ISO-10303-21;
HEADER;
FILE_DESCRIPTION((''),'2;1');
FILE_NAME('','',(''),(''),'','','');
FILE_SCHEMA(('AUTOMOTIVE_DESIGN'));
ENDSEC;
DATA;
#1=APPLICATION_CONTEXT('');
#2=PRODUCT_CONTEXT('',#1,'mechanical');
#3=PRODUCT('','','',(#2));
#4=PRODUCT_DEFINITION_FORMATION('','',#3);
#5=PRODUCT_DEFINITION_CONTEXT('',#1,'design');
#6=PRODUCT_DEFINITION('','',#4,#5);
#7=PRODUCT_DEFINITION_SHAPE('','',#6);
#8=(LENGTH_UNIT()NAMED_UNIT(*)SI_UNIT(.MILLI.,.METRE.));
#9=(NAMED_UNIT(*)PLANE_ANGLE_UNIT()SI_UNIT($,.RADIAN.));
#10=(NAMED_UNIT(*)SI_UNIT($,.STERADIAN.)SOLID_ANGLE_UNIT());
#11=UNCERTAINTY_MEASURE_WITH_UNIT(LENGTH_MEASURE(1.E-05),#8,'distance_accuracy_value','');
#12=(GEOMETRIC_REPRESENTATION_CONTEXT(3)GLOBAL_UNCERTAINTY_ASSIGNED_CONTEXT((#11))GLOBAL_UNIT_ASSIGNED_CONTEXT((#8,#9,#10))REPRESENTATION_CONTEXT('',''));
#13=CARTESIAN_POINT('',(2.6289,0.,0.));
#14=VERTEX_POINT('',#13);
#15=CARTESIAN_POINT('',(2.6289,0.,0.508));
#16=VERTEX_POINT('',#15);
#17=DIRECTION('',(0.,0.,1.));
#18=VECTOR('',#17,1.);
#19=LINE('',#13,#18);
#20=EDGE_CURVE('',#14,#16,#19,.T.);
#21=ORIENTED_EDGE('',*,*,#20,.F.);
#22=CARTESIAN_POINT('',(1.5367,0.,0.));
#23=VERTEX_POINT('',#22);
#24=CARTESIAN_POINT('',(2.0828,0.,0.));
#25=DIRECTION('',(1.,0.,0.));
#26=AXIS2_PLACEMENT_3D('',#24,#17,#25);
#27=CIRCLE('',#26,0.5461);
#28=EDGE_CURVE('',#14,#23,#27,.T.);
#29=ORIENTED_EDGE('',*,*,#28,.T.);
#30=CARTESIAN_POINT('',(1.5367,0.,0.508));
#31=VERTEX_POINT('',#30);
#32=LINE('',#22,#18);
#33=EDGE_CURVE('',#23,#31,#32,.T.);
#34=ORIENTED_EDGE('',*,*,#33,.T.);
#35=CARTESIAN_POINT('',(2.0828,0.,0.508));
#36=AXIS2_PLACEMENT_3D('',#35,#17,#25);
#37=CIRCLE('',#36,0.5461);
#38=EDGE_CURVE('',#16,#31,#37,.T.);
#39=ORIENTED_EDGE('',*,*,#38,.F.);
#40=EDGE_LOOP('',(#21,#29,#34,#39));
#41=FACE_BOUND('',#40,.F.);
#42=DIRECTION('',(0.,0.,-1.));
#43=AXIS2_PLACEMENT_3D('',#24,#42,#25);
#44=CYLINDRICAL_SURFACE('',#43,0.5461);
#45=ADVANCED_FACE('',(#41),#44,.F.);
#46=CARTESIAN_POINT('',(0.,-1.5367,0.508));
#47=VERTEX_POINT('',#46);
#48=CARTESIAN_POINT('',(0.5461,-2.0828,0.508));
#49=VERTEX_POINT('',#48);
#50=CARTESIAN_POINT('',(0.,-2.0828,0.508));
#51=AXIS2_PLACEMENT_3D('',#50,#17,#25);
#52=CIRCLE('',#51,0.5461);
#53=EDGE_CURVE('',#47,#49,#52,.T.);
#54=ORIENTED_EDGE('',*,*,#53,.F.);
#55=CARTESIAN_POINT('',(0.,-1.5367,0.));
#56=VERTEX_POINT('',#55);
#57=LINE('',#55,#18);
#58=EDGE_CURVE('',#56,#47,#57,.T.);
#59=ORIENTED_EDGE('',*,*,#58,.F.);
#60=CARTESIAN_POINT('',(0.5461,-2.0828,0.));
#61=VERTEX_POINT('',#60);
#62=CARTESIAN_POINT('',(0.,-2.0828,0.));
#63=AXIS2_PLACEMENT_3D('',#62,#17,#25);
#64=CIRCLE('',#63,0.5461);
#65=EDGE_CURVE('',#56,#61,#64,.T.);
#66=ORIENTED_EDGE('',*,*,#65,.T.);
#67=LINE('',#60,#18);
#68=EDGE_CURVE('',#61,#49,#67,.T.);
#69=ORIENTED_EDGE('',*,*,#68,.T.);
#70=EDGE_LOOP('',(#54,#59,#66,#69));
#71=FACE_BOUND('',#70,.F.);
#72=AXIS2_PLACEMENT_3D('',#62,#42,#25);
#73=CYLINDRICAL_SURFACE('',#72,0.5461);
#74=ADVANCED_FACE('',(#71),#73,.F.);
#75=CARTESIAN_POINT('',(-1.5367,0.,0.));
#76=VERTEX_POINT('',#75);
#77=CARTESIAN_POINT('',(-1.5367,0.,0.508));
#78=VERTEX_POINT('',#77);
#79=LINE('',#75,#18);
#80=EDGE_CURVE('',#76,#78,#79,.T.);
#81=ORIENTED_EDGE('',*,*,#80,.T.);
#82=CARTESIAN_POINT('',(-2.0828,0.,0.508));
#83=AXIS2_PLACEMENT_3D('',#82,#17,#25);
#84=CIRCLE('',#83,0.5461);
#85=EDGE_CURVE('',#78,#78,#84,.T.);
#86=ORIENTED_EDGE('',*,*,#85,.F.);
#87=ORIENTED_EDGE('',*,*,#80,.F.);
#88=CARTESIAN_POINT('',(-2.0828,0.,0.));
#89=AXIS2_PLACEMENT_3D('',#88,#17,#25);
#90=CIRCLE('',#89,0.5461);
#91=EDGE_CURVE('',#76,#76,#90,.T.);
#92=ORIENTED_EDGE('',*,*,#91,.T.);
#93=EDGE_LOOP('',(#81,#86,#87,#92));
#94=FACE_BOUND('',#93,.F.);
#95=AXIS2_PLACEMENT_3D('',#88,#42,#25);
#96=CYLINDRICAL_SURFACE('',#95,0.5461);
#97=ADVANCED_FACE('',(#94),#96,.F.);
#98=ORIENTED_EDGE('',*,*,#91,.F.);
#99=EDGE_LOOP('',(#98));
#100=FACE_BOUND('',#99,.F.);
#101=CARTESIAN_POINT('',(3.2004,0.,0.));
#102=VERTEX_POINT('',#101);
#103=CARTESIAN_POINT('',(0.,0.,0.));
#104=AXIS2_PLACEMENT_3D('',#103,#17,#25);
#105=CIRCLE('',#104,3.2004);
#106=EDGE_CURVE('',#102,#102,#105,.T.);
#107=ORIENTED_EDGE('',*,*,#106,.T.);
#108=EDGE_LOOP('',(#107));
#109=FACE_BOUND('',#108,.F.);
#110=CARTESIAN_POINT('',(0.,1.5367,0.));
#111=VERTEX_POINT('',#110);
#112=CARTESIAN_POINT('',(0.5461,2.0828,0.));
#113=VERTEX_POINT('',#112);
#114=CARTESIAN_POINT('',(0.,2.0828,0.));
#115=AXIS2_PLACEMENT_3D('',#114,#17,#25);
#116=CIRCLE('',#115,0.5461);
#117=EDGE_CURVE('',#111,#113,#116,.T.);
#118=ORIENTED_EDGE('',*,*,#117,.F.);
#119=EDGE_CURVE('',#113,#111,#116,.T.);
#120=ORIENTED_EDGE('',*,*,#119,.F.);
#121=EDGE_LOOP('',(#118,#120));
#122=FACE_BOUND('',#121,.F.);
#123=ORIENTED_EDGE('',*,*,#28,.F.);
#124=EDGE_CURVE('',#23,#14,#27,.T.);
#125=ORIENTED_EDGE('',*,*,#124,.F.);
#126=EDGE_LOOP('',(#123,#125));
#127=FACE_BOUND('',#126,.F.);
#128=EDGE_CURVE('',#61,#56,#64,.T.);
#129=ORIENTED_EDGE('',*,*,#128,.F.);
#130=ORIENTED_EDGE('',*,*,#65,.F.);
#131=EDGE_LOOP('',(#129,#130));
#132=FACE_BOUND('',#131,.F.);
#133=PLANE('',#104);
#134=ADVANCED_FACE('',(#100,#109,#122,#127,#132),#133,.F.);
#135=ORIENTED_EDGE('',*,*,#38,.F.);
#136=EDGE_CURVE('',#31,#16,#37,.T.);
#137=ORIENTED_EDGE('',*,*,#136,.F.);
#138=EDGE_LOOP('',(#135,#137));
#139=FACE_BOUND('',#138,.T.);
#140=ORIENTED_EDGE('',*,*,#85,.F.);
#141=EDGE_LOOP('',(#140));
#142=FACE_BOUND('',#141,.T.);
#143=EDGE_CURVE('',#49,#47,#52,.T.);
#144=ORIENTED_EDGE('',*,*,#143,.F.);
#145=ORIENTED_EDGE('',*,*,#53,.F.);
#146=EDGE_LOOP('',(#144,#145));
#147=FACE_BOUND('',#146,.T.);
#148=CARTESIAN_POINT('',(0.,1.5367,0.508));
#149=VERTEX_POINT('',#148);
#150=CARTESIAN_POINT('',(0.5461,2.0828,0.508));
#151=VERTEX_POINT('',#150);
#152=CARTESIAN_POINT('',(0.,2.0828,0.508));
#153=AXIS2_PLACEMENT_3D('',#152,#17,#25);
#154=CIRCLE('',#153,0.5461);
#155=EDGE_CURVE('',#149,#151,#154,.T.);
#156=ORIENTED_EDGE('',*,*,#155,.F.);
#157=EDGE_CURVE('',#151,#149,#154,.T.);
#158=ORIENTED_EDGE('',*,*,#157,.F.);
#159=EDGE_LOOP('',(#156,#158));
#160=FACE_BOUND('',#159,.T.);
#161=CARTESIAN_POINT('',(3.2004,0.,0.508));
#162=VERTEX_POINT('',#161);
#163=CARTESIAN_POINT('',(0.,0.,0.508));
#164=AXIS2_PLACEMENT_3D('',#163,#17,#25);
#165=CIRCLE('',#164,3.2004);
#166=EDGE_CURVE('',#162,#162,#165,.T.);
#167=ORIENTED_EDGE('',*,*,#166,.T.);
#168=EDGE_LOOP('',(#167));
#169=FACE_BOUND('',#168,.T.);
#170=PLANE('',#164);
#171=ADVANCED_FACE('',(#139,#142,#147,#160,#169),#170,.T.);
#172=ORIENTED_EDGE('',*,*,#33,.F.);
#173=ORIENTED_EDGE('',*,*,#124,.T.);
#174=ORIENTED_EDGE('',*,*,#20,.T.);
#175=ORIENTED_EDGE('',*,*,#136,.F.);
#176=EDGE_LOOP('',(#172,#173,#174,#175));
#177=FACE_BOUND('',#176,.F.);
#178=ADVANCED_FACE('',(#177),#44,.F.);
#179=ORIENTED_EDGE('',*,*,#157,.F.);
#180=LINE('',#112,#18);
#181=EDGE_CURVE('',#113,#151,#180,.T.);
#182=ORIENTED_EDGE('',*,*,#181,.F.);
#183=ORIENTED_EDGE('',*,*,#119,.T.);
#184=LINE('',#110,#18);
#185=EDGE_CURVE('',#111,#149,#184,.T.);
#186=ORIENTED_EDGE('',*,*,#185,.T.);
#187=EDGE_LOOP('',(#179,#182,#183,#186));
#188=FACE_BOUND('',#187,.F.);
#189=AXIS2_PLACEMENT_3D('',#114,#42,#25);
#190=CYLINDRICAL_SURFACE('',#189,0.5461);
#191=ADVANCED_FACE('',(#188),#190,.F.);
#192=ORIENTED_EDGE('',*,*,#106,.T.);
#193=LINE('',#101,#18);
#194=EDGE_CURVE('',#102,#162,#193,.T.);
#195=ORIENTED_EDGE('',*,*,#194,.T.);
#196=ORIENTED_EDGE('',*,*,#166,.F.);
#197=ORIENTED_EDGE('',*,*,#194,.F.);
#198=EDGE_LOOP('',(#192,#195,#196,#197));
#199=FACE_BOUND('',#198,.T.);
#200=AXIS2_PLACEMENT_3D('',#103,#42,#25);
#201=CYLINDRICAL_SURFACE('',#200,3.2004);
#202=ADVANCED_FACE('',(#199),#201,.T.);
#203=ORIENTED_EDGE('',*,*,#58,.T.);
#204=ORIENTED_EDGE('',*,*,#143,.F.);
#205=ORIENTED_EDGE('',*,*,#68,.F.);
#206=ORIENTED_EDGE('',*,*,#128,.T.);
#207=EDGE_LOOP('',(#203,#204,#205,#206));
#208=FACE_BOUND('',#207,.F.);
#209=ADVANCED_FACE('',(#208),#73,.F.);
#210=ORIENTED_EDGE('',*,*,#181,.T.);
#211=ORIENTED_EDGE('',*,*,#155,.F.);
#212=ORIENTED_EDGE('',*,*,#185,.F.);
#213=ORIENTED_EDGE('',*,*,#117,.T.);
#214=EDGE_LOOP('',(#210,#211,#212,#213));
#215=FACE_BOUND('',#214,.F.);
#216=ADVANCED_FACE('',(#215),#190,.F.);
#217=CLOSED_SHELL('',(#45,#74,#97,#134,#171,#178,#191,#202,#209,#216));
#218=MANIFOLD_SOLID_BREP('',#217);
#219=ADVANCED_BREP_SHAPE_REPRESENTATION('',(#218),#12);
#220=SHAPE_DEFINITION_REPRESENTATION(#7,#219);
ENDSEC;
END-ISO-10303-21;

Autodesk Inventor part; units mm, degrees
ref_plane "YZ Plane" through (0, 0, 0) normal (1, 0, 0) x (0, 1, 0)
ref_plane "XZ Plane" through (0, 0, 0) normal (0, 1, 0) x (-1, 0, 0)
ref_plane "XY Plane" through (0, 0, 0) normal (0, 0, 1) x (1, 0, 0)
sketch "Sketch1" plane through (0, 0, 0) normal (0, 0, 1) x (1, 0, 0)
  circle A0 centre (0, 0) radius 3.2004
  line L0 (0, 0) -> (0, 2.0828)
  line L1 (0, 0) -> (2.0828, 0)
  line L2 (0, 0) -> (0, -2.0828)
  line L3 (0, 0) -> (-2.0828, 0)
  circle A1 centre (0, 2.0828) radius 0.5461
  circle A2 centre (2.0828, 0) radius 0.5461
  circle A3 centre (0, -2.0828) radius 0.5461
  circle A4 centre (-2.0828, 0) radius 0.5461
  dimension "d1" = 2.0828
  dimension "d2" = 2.0828
  dimension "d3" = 2.0828
  dimension "d4" = 2.0828
  dimension "d5" = 1.0922
  dimension "d6" = 1.0922
  dimension "d7" = 1.0922
  dimension "d8" = 1.0922
extrude "Extrusion1" add sketch "Sketch1" along normal blind 0.508
properties part number "cap"
